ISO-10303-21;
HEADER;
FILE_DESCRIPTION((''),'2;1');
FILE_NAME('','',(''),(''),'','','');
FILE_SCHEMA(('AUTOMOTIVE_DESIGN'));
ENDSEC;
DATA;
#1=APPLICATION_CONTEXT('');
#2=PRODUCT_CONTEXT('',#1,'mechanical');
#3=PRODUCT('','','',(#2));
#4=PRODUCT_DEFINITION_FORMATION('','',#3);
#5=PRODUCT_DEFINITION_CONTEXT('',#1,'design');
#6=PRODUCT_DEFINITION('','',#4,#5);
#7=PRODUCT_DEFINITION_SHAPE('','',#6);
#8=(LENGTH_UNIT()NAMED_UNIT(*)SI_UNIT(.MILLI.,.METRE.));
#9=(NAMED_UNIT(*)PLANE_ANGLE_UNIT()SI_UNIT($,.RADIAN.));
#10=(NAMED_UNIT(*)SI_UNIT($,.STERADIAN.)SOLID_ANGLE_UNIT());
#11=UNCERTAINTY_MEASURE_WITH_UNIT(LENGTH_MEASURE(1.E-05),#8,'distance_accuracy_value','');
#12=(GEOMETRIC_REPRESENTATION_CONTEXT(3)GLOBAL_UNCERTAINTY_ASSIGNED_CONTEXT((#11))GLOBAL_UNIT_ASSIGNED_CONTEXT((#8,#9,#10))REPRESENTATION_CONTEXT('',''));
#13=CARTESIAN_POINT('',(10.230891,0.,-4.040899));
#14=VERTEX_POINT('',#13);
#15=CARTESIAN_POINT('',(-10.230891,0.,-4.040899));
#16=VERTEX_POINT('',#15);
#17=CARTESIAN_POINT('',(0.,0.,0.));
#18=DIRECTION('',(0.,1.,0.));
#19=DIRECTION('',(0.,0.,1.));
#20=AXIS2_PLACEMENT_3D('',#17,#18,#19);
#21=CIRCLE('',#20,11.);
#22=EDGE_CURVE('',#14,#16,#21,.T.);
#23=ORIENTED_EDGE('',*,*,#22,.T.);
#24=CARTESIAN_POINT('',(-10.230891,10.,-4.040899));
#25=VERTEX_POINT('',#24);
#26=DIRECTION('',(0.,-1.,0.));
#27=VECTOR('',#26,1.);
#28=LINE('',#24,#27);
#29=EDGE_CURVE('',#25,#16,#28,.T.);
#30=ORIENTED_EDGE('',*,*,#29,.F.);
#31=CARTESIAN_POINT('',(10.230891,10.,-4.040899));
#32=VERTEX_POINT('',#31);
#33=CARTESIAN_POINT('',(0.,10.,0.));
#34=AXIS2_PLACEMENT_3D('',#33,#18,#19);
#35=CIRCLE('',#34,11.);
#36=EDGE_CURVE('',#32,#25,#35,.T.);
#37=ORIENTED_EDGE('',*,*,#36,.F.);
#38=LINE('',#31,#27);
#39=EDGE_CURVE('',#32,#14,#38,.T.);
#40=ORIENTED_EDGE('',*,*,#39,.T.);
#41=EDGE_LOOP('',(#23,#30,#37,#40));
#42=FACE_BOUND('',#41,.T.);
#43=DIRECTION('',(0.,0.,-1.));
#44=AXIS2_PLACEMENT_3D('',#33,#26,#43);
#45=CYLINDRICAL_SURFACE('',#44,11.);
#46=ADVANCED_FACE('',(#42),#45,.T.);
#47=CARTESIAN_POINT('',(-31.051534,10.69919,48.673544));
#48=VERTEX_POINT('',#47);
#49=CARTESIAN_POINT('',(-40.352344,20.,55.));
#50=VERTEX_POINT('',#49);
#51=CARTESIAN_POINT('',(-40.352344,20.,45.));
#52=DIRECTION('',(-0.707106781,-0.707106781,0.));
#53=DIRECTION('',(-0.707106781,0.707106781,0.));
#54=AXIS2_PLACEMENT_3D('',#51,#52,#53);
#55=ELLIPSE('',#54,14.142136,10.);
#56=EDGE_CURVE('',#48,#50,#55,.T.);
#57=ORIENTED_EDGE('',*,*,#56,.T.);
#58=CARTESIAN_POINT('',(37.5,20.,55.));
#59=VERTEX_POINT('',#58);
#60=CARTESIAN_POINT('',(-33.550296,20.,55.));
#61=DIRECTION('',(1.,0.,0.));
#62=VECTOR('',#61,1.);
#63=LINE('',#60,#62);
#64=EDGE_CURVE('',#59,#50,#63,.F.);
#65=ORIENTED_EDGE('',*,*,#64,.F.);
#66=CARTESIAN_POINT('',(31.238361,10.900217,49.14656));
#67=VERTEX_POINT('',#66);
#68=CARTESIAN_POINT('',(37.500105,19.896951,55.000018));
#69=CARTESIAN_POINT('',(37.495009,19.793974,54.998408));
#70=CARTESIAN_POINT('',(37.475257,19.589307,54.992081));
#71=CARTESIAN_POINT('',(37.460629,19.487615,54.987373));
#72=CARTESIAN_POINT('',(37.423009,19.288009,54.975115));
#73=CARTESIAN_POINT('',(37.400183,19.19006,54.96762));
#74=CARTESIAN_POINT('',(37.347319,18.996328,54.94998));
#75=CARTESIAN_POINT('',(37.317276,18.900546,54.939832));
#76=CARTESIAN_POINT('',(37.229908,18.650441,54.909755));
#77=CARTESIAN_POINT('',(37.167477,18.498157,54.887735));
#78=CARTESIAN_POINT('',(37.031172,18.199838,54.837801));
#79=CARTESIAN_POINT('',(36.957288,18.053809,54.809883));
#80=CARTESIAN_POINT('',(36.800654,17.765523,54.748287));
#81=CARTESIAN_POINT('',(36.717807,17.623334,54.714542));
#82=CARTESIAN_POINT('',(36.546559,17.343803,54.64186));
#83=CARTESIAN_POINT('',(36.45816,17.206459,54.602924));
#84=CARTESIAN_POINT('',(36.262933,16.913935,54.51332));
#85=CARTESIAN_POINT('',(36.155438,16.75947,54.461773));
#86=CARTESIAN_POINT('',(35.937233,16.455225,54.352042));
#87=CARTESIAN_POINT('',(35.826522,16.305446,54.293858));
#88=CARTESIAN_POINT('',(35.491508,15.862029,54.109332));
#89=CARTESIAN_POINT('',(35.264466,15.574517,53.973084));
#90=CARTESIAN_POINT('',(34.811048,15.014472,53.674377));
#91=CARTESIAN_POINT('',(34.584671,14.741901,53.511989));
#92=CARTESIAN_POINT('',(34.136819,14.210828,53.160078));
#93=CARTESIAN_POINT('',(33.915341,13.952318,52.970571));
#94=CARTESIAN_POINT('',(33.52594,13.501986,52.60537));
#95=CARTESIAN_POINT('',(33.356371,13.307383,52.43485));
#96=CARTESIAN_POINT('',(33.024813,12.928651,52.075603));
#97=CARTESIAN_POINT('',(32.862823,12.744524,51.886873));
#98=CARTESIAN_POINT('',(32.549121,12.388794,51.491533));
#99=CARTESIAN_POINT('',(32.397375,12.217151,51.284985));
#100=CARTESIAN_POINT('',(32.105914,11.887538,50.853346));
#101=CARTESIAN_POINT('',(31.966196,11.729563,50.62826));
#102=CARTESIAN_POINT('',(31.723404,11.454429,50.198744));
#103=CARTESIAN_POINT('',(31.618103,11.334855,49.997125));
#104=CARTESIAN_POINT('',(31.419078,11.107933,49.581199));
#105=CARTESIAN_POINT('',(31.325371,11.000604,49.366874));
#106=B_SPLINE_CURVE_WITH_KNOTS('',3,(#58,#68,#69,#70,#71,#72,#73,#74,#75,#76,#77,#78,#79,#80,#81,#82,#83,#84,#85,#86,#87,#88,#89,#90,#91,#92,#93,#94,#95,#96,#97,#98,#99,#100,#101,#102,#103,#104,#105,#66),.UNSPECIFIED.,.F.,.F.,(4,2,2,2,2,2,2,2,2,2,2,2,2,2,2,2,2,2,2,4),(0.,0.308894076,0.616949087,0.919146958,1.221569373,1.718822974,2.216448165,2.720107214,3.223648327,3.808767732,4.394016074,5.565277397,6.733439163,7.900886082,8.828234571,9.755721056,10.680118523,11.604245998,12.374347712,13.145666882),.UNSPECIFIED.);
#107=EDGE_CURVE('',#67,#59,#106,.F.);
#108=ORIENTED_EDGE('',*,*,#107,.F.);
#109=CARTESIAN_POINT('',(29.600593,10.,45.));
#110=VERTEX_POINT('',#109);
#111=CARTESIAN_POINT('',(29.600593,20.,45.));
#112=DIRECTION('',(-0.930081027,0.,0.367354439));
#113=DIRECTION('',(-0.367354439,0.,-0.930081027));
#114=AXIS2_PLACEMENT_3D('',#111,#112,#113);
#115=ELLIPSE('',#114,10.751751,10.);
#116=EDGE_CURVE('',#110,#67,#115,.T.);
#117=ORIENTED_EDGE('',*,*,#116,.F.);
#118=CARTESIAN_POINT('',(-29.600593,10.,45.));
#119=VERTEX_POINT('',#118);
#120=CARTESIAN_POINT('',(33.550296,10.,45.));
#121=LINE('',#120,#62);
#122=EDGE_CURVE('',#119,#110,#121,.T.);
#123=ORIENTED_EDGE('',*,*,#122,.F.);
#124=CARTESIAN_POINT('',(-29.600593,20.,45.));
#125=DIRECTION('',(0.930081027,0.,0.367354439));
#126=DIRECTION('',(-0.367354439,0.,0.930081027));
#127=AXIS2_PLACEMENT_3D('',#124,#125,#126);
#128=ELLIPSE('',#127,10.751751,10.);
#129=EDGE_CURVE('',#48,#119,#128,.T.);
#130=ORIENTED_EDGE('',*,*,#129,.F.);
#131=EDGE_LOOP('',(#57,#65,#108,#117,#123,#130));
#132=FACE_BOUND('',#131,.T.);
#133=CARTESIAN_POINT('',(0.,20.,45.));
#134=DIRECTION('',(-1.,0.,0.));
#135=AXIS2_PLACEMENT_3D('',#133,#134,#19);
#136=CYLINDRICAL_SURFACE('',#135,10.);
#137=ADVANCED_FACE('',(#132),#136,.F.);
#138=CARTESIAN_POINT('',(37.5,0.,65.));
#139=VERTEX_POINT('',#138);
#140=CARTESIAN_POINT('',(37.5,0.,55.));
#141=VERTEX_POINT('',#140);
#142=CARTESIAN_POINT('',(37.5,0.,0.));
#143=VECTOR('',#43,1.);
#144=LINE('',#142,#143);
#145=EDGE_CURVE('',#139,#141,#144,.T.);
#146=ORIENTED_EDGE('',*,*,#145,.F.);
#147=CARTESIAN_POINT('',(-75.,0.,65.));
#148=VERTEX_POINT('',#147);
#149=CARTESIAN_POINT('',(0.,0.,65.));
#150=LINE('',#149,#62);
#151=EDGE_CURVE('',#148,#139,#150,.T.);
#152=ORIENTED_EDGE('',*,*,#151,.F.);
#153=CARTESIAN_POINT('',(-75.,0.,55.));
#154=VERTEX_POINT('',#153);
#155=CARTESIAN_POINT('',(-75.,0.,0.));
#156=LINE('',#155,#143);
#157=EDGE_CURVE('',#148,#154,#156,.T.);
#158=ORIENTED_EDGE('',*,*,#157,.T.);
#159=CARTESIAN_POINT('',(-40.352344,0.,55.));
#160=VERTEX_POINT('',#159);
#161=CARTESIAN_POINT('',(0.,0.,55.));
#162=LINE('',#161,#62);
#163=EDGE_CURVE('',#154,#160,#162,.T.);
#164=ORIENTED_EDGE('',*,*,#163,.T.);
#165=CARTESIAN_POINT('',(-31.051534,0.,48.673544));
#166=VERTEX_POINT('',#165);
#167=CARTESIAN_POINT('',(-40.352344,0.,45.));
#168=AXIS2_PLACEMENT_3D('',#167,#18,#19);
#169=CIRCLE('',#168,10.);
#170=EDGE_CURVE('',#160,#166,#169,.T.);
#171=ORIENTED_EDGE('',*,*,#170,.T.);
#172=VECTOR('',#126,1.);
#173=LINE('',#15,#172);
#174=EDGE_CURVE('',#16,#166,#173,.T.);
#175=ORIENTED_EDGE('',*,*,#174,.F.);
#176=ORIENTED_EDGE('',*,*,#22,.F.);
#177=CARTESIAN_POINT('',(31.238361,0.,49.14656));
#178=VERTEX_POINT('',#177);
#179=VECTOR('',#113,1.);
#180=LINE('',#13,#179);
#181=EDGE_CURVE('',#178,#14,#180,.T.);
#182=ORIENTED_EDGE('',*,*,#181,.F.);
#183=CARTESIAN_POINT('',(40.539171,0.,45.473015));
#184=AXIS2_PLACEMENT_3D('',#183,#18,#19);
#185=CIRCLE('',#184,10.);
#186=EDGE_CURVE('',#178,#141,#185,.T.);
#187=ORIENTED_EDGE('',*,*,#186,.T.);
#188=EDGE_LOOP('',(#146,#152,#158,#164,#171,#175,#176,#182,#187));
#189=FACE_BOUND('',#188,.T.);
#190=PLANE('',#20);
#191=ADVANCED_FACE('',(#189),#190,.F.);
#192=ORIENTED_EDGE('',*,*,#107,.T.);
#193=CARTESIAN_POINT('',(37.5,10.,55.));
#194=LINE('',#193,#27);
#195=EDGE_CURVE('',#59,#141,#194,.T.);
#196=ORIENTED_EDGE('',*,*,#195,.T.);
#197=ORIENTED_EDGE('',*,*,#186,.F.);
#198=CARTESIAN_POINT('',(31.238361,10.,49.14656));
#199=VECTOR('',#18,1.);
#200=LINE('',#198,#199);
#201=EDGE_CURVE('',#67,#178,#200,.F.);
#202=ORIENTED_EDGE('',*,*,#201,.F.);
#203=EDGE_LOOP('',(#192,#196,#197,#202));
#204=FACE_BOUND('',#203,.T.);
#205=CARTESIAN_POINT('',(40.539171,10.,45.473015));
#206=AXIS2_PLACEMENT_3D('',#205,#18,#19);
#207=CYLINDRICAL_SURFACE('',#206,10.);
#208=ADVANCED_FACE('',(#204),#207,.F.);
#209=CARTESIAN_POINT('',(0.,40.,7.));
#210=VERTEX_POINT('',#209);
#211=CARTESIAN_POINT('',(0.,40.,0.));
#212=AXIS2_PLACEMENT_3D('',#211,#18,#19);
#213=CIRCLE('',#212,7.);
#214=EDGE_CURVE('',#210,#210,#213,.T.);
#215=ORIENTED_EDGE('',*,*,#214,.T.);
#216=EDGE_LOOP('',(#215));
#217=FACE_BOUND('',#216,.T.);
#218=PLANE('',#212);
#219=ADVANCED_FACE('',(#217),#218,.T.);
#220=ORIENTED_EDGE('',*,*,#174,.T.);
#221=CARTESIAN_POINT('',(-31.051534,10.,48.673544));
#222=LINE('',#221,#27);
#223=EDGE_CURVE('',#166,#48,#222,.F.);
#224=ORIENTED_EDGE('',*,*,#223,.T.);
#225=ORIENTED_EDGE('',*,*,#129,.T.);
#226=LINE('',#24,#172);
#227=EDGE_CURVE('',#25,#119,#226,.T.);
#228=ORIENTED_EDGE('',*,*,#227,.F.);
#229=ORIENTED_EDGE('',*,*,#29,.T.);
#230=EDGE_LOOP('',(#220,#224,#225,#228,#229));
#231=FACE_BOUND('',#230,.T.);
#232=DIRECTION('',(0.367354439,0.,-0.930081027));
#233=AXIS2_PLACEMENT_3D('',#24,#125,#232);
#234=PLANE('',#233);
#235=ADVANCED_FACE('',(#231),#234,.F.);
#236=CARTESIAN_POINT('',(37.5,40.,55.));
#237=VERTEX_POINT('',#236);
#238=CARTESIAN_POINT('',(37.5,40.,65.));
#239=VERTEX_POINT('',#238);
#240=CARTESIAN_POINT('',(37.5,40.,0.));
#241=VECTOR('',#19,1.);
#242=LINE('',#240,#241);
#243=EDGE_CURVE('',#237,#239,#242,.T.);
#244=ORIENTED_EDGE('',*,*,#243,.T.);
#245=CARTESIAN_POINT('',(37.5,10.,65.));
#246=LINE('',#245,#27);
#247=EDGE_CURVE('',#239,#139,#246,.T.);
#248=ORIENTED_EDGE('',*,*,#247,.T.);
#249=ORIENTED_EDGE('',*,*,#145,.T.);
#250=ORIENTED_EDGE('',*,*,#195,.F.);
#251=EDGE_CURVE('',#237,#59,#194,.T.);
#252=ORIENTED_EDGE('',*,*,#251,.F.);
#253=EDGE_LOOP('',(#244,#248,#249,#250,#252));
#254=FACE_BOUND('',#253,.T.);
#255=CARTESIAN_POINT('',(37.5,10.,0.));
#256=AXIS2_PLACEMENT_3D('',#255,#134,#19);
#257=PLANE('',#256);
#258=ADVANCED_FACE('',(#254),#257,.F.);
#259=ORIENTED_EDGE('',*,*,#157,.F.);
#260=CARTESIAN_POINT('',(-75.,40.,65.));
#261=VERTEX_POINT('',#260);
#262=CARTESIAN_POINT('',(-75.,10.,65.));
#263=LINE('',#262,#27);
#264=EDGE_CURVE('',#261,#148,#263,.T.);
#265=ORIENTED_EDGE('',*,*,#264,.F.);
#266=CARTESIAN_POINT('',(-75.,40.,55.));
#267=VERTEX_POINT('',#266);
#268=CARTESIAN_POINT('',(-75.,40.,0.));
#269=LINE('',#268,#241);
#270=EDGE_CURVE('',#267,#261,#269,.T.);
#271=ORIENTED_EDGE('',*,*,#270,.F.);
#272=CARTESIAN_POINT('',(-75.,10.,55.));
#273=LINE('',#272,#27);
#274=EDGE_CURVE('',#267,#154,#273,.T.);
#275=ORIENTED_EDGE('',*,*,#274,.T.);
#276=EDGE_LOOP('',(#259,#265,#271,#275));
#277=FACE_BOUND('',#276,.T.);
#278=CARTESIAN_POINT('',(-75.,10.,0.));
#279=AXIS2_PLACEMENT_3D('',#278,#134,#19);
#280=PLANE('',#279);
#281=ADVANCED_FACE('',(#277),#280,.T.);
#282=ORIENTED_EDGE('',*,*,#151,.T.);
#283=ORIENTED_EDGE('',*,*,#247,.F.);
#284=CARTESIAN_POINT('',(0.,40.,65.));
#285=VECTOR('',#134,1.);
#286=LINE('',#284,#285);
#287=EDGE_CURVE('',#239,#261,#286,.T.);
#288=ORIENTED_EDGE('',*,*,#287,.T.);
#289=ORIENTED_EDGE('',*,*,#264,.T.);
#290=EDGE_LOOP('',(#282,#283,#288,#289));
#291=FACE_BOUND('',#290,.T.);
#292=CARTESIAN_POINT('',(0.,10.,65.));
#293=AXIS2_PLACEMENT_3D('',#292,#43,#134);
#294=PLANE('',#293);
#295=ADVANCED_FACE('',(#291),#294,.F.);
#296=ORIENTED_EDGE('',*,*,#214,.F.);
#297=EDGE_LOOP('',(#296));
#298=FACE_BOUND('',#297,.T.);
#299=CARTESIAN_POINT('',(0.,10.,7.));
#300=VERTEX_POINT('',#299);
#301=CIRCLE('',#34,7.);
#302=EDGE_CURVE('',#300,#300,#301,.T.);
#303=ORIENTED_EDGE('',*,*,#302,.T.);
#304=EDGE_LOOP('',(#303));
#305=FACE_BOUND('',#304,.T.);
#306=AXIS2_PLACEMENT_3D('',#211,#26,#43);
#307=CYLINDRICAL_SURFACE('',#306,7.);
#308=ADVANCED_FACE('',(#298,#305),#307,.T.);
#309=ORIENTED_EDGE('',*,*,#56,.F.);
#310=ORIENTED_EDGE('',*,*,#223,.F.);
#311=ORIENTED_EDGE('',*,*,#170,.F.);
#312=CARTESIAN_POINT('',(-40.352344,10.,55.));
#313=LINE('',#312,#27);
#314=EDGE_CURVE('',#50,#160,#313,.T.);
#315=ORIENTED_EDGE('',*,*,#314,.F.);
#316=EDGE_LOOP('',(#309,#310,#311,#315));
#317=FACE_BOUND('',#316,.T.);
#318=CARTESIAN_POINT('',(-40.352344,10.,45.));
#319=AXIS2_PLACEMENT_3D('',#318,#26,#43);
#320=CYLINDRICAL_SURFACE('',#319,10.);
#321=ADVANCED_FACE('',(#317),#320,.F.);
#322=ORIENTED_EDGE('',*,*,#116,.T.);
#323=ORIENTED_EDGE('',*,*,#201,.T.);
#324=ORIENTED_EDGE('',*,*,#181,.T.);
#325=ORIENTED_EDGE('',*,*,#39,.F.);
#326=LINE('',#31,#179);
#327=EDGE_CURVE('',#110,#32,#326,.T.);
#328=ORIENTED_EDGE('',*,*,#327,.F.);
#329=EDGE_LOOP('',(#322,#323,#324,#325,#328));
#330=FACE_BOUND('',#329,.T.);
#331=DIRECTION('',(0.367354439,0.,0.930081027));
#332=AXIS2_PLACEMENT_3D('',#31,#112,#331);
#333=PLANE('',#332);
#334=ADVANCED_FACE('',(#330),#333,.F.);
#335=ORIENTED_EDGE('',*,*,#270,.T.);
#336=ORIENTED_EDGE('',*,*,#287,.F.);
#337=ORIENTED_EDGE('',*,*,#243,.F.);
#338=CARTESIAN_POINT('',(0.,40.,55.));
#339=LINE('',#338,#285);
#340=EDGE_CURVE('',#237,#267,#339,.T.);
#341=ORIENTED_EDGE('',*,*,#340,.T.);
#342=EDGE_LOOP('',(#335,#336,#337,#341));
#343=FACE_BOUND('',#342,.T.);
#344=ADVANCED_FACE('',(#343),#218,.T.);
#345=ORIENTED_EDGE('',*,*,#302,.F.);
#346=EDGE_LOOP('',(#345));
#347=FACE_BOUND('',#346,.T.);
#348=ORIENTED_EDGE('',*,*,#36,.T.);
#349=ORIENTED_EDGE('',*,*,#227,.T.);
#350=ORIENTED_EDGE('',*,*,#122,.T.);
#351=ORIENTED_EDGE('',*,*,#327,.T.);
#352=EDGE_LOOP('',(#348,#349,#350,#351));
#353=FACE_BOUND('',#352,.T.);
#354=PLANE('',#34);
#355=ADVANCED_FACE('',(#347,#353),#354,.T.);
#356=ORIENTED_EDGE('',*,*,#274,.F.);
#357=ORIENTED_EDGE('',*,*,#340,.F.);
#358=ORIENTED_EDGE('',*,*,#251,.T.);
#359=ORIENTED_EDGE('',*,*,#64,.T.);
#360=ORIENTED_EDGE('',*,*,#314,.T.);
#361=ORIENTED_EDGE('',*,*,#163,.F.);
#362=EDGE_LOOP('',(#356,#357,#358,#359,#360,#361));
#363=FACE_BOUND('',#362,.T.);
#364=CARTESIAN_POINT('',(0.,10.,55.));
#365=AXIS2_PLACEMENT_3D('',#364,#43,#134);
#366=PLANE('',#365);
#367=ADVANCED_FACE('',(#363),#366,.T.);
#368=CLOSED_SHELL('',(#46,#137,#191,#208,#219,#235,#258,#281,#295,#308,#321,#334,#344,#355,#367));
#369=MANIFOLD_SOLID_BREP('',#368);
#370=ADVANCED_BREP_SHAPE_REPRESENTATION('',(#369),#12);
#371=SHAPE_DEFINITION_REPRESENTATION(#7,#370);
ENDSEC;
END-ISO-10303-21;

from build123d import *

# Parameters (mm, degrees)
SKETCH1_R           = 11
SKETCH1_R_2         = 7
BOSS_EXTRUDE1_DEPTH = 10
BOSS_EXTRUDE2_START = 10
SKETCH1_3_W         = 112.5
SKETCH1_3_H         = 10
SKETCH1_3_R         = 7
BOSS_EXTRUDE2_DEPTH = 30
FILLET1_R           = 10


with BuildPart() as part:
    # Sketch1 → Boss-Extrude1 (new body)
    # profile 1 of 6: a face of its own
    with BuildSketch(Plane(origin=(0, 0, 0), x_dir=(1, 0, 0), z_dir=(0, 1, 0))):
        Polygon((-37.5, -65), (-33.550296394, -55), (-75, -55), (-75, -65), align=None)
    # profile 2 of 6: a face of its own
    with BuildSketch(Plane(origin=(0, 0, 0), x_dir=(1, 0, 0), z_dir=(0, 1, 0))):
        Polygon((33.550296394, -55), (-33.550296394, -55), (-37.5, -65), (37.5, -65), align=None)
    # profile 3 of 6: a face of its own
    with BuildSketch(Plane(origin=(0, 0, 0), x_dir=(1, 0, 0), z_dir=(0, 1, 0))):
        Polygon((37.5, -55), (33.550296394, -55), (37.5, -65), align=None)
    # profile 4 of 6: a face of its own
    with BuildSketch(Plane(origin=(0, 0, 0), x_dir=(1, 0, 0), z_dir=(0, 1, 0))):
        with BuildLine():
            ThreePointArc((11, 0), (-2.056720175, -10.806012314), (-10.230891295, 4.040898824))
            Line((-10.230891295, 4.040898824), (-33.550296394, -55))
            Line((-33.550296394, -55), (33.550296394, -55))
            Line((33.550296394, -55), (10.230891295, 4.040898824))
            ThreePointArc((10.230891295, 4.040898824), (10.806012314, 2.056720175), (11, 0))
        make_face()
    # profile 5 of 6: a face of its own
    with BuildSketch(Plane(origin=(0, 0, 0), x_dir=(1, 0, 0), z_dir=(0, 1, 0))):
        Circle(SKETCH1_R)
        Circle(SKETCH1_R_2, mode=Mode.SUBTRACT)
    # profile 6 of 6: a face of its own
    with BuildSketch(Plane(origin=(0, 0, 0), x_dir=(1, 0, 0), z_dir=(0, 1, 0))):
        Circle(SKETCH1_R_2)
    extrude(amount=BOSS_EXTRUDE1_DEPTH)

    # Sketch1<3> → Boss-Extrude2 (add)
    with BuildSketch(Plane(origin=(0, 0, 0), x_dir=(1, 0, 0), z_dir=(0, 1, 0)).offset(BOSS_EXTRUDE2_START)):
        with Locations((-18.75, -60)):
            Rectangle(SKETCH1_3_W, SKETCH1_3_H)
        with Locations(Location((0, 0, 0), (0, 0, 270))):
            Circle(SKETCH1_3_R)
    extrude(amount=BOSS_EXTRUDE2_DEPTH)

    # Fillet1
    # the kernel refuses this fillet: 10 mm, written as the material it adds along each edge
    with BuildSketch(Plane(origin=(-33.550296394, 0, 55), x_dir=(-1, 0, 0), z_dir=(0, 1, 0))) as fillet1_piece_1:
        with BuildLine():
            CenterArc((FILLET1_R * 0.680204781295, -FILLET1_R), FILLET1_R, 90, 68.447449105)
            Line((-FILLET1_R * 0.249876245536, -FILLET1_R * 0.632645561443), (-FILLET1_R * 0.268477866073, -FILLET1_R * 0.625298472672))
            Line((-FILLET1_R * 0.268477866073, -FILLET1_R * 0.625298472672), (-FILLET1_R * 0.0136040956259, FILLET1_R * 0.02))
            Line((-FILLET1_R * 0.0136040956259, FILLET1_R * 0.02), (FILLET1_R * 0.680204781295, FILLET1_R * 0.02))
            Line((FILLET1_R * 0.680204781295, FILLET1_R * 0.02), (FILLET1_R * 0.680204781295, 0))
        make_face()
    extrude(amount=10)
    with BuildSketch(Plane(origin=(33.550296394, 0, 55), x_dir=(1, 0, 0), z_dir=(0, 1, 0))) as fillet1_piece_2:
        with BuildLine():
            CenterArc((6.988874819, 9.526984745), FILLET1_R, 201.552550895, 50.754421911)
            Line((-2.31193545, 5.85344036), (-2.497951655, 5.779969472))
            Line((-2.497951655, 5.779969472), (-0.186016205, -0.073470888))
            Line((-0.186016205, -0.073470888), (0, -0.2))
            ThreePointArc((0, -0.2), (1.974851803, -0.2), (3.888920182, -0.190539695))
            Line((3.888920182, -0.190539695), (3.949703606, 0))
        make_face()
    extrude(amount=10)
    with BuildSketch(Plane(origin=(58.550296394, 10, 55), x_dir=(0, 1, 0), z_dir=(-1, 0, 0))) as fillet1_piece_3_section:
        with BuildLine():
            CenterArc((FILLET1_R, FILLET1_R), FILLET1_R, 180, 90)
            Line((0, FILLET1_R), (-FILLET1_R * 0.02, FILLET1_R))
            Line((-FILLET1_R * 0.02, FILLET1_R), (-FILLET1_R * 0.02, -FILLET1_R * 0.02))
            Line((-FILLET1_R * 0.02, -FILLET1_R * 0.02), (FILLET1_R, -FILLET1_R * 0.02))
            Line((FILLET1_R, -FILLET1_R * 0.02), (FILLET1_R, 0))
        make_face()
    fillet1_piece_3 = extrude(amount=117.100592788, mode=Mode.PRIVATE)
    fillet1_piece_3 = split(fillet1_piece_3, bisect_by=Plane(origin=(28.268391296, 12.297159596, 41.627084904), z_dir=(-0.9300810268318512, 0, 0.3673544385568373)), keep=Keep.TOP, mode=Mode.PRIVATE)
    fillet1_piece_3 = split(fillet1_piece_3, bisect_by=Plane(origin=(-28.268391296, 12.297159596, 41.627084904), z_dir=(0.9300810268318513, 0, 0.36735443855683725)), keep=Keep.TOP, mode=Mode.PRIVATE)
    add(fillet1_piece_3)
    with BuildSketch(Plane(origin=(-33.550296394, 0, 55), x_dir=(-1, 0, 0), z_dir=(0, 1, 0))) as fillet1_piece_4a_section:
        with BuildLine():
            CenterArc((FILLET1_R * 0.680204781295, -FILLET1_R), FILLET1_R, 90, 68.447449105)
            Line((-FILLET1_R * 0.249876245536, -FILLET1_R * 0.632645561443), (-FILLET1_R * 0.268477866073, -FILLET1_R * 0.625298472672))
            Line((-FILLET1_R * 0.268477866073, -FILLET1_R * 0.625298472672), (-FILLET1_R * 0.0136040956259, FILLET1_R * 0.02))
            Line((-FILLET1_R * 0.0136040956259, FILLET1_R * 0.02), (FILLET1_R * 0.680204781295, FILLET1_R * 0.02))
            Line((FILLET1_R * 0.680204781295, FILLET1_R * 0.02), (FILLET1_R * 0.680204781295, 0))
        make_face()
    fillet1_piece_4a = extrude(amount=27.005119532, mode=Mode.PRIVATE)
    fillet1_piece_4a = split(fillet1_piece_4a, bisect_by=Plane(origin=(-34.492064323, 10, 53.615464114), z_dir=(0, 1, 0)), keep=Keep.TOP, mode=Mode.PRIVATE)
    with BuildSketch(Plane(origin=(58.550296394, 10, 55), x_dir=(0, 1, 0), z_dir=(-1, 0, 0))) as fillet1_piece_4b_section:
        with BuildLine():
            CenterArc((FILLET1_R, FILLET1_R), FILLET1_R, 180, 90)
            Line((0, FILLET1_R), (-FILLET1_R * 0.02, FILLET1_R))
            Line((-FILLET1_R * 0.02, FILLET1_R), (-FILLET1_R * 0.02, -FILLET1_R * 0.02))
            Line((-FILLET1_R * 0.02, -FILLET1_R * 0.02), (FILLET1_R, -FILLET1_R * 0.02))
            Line((FILLET1_R, -FILLET1_R * 0.02), (FILLET1_R, 0))
        make_face()
    fillet1_piece_4b = extrude(amount=117.100592788, mode=Mode.PRIVATE)
    fillet1_piece_4b = split(fillet1_piece_4b, bisect_by=Plane(origin=(-34.377193324, 12.222070762, 57.093567044), z_dir=(-0.9300810268318513, 0, -0.36735443855683725)), keep=Keep.TOP, mode=Mode.PRIVATE)
    fillet1_piece_4 = fillet1_piece_4a & fillet1_piece_4b
    add(fillet1_piece_4)
    with BuildSketch(Plane(origin=(58.550296394, 10, 55), x_dir=(0, 1, 0), z_dir=(-1, 0, 0))) as fillet1_piece_5a_section:
        with BuildLine():
            CenterArc((FILLET1_R, FILLET1_R), FILLET1_R, 180, 90)
            Line((0, FILLET1_R), (-FILLET1_R * 0.02, FILLET1_R))
            Line((-FILLET1_R * 0.02, FILLET1_R), (-FILLET1_R * 0.02, -FILLET1_R * 0.02))
            Line((-FILLET1_R * 0.02, -FILLET1_R * 0.02), (FILLET1_R, -FILLET1_R * 0.02))
            Line((FILLET1_R, -FILLET1_R * 0.02), (FILLET1_R, 0))
        make_face()
    fillet1_piece_5a = extrude(amount=117.100592788, mode=Mode.PRIVATE)
    fillet1_piece_5a = split(fillet1_piece_5a, bisect_by=Plane(origin=(37.5, 12.040069704, 52.357079342), z_dir=(-1, 0, 0)), keep=Keep.TOP, mode=Mode.PRIVATE)
    fillet1_piece_5a = split(fillet1_piece_5a, bisect_by=Plane(origin=(32.843361018, 12.040069704, 53.210155884), z_dir=(0.9300810268318512, 0, -0.3673544385568373)), keep=Keep.TOP, mode=Mode.PRIVATE)
    with BuildSketch(Plane(origin=(33.550296394, 0, 55), x_dir=(1, 0, 0), z_dir=(0, 1, 0))) as fillet1_piece_5b_section:
        with BuildLine():
            CenterArc((6.988874819, 9.526984745), FILLET1_R, 201.552550895, 50.754421911)
            Line((-2.31193545, 5.85344036), (-2.497951655, 5.779969472))
            Line((-2.497951655, 5.779969472), (-0.186016205, -0.073470888))
            Line((-0.186016205, -0.073470888), (0, -0.2))
            ThreePointArc((0, -0.2), (1.974851803, -0.2), (3.888920182, -0.190539695))
            Line((3.888920182, -0.190539695), (3.949703606, 0))
        make_face()
    fillet1_piece_5b = extrude(amount=25.733683924, mode=Mode.PRIVATE)
    fillet1_piece_5b = split(fillet1_piece_5b, bisect_by=Plane(origin=(33.943390061, 10, 53.584203188), z_dir=(0, 1, 0)), keep=Keep.TOP, mode=Mode.PRIVATE)
    fillet1_piece_5 = fillet1_piece_5a & fillet1_piece_5b
    add(fillet1_piece_5)


solid = part.part
